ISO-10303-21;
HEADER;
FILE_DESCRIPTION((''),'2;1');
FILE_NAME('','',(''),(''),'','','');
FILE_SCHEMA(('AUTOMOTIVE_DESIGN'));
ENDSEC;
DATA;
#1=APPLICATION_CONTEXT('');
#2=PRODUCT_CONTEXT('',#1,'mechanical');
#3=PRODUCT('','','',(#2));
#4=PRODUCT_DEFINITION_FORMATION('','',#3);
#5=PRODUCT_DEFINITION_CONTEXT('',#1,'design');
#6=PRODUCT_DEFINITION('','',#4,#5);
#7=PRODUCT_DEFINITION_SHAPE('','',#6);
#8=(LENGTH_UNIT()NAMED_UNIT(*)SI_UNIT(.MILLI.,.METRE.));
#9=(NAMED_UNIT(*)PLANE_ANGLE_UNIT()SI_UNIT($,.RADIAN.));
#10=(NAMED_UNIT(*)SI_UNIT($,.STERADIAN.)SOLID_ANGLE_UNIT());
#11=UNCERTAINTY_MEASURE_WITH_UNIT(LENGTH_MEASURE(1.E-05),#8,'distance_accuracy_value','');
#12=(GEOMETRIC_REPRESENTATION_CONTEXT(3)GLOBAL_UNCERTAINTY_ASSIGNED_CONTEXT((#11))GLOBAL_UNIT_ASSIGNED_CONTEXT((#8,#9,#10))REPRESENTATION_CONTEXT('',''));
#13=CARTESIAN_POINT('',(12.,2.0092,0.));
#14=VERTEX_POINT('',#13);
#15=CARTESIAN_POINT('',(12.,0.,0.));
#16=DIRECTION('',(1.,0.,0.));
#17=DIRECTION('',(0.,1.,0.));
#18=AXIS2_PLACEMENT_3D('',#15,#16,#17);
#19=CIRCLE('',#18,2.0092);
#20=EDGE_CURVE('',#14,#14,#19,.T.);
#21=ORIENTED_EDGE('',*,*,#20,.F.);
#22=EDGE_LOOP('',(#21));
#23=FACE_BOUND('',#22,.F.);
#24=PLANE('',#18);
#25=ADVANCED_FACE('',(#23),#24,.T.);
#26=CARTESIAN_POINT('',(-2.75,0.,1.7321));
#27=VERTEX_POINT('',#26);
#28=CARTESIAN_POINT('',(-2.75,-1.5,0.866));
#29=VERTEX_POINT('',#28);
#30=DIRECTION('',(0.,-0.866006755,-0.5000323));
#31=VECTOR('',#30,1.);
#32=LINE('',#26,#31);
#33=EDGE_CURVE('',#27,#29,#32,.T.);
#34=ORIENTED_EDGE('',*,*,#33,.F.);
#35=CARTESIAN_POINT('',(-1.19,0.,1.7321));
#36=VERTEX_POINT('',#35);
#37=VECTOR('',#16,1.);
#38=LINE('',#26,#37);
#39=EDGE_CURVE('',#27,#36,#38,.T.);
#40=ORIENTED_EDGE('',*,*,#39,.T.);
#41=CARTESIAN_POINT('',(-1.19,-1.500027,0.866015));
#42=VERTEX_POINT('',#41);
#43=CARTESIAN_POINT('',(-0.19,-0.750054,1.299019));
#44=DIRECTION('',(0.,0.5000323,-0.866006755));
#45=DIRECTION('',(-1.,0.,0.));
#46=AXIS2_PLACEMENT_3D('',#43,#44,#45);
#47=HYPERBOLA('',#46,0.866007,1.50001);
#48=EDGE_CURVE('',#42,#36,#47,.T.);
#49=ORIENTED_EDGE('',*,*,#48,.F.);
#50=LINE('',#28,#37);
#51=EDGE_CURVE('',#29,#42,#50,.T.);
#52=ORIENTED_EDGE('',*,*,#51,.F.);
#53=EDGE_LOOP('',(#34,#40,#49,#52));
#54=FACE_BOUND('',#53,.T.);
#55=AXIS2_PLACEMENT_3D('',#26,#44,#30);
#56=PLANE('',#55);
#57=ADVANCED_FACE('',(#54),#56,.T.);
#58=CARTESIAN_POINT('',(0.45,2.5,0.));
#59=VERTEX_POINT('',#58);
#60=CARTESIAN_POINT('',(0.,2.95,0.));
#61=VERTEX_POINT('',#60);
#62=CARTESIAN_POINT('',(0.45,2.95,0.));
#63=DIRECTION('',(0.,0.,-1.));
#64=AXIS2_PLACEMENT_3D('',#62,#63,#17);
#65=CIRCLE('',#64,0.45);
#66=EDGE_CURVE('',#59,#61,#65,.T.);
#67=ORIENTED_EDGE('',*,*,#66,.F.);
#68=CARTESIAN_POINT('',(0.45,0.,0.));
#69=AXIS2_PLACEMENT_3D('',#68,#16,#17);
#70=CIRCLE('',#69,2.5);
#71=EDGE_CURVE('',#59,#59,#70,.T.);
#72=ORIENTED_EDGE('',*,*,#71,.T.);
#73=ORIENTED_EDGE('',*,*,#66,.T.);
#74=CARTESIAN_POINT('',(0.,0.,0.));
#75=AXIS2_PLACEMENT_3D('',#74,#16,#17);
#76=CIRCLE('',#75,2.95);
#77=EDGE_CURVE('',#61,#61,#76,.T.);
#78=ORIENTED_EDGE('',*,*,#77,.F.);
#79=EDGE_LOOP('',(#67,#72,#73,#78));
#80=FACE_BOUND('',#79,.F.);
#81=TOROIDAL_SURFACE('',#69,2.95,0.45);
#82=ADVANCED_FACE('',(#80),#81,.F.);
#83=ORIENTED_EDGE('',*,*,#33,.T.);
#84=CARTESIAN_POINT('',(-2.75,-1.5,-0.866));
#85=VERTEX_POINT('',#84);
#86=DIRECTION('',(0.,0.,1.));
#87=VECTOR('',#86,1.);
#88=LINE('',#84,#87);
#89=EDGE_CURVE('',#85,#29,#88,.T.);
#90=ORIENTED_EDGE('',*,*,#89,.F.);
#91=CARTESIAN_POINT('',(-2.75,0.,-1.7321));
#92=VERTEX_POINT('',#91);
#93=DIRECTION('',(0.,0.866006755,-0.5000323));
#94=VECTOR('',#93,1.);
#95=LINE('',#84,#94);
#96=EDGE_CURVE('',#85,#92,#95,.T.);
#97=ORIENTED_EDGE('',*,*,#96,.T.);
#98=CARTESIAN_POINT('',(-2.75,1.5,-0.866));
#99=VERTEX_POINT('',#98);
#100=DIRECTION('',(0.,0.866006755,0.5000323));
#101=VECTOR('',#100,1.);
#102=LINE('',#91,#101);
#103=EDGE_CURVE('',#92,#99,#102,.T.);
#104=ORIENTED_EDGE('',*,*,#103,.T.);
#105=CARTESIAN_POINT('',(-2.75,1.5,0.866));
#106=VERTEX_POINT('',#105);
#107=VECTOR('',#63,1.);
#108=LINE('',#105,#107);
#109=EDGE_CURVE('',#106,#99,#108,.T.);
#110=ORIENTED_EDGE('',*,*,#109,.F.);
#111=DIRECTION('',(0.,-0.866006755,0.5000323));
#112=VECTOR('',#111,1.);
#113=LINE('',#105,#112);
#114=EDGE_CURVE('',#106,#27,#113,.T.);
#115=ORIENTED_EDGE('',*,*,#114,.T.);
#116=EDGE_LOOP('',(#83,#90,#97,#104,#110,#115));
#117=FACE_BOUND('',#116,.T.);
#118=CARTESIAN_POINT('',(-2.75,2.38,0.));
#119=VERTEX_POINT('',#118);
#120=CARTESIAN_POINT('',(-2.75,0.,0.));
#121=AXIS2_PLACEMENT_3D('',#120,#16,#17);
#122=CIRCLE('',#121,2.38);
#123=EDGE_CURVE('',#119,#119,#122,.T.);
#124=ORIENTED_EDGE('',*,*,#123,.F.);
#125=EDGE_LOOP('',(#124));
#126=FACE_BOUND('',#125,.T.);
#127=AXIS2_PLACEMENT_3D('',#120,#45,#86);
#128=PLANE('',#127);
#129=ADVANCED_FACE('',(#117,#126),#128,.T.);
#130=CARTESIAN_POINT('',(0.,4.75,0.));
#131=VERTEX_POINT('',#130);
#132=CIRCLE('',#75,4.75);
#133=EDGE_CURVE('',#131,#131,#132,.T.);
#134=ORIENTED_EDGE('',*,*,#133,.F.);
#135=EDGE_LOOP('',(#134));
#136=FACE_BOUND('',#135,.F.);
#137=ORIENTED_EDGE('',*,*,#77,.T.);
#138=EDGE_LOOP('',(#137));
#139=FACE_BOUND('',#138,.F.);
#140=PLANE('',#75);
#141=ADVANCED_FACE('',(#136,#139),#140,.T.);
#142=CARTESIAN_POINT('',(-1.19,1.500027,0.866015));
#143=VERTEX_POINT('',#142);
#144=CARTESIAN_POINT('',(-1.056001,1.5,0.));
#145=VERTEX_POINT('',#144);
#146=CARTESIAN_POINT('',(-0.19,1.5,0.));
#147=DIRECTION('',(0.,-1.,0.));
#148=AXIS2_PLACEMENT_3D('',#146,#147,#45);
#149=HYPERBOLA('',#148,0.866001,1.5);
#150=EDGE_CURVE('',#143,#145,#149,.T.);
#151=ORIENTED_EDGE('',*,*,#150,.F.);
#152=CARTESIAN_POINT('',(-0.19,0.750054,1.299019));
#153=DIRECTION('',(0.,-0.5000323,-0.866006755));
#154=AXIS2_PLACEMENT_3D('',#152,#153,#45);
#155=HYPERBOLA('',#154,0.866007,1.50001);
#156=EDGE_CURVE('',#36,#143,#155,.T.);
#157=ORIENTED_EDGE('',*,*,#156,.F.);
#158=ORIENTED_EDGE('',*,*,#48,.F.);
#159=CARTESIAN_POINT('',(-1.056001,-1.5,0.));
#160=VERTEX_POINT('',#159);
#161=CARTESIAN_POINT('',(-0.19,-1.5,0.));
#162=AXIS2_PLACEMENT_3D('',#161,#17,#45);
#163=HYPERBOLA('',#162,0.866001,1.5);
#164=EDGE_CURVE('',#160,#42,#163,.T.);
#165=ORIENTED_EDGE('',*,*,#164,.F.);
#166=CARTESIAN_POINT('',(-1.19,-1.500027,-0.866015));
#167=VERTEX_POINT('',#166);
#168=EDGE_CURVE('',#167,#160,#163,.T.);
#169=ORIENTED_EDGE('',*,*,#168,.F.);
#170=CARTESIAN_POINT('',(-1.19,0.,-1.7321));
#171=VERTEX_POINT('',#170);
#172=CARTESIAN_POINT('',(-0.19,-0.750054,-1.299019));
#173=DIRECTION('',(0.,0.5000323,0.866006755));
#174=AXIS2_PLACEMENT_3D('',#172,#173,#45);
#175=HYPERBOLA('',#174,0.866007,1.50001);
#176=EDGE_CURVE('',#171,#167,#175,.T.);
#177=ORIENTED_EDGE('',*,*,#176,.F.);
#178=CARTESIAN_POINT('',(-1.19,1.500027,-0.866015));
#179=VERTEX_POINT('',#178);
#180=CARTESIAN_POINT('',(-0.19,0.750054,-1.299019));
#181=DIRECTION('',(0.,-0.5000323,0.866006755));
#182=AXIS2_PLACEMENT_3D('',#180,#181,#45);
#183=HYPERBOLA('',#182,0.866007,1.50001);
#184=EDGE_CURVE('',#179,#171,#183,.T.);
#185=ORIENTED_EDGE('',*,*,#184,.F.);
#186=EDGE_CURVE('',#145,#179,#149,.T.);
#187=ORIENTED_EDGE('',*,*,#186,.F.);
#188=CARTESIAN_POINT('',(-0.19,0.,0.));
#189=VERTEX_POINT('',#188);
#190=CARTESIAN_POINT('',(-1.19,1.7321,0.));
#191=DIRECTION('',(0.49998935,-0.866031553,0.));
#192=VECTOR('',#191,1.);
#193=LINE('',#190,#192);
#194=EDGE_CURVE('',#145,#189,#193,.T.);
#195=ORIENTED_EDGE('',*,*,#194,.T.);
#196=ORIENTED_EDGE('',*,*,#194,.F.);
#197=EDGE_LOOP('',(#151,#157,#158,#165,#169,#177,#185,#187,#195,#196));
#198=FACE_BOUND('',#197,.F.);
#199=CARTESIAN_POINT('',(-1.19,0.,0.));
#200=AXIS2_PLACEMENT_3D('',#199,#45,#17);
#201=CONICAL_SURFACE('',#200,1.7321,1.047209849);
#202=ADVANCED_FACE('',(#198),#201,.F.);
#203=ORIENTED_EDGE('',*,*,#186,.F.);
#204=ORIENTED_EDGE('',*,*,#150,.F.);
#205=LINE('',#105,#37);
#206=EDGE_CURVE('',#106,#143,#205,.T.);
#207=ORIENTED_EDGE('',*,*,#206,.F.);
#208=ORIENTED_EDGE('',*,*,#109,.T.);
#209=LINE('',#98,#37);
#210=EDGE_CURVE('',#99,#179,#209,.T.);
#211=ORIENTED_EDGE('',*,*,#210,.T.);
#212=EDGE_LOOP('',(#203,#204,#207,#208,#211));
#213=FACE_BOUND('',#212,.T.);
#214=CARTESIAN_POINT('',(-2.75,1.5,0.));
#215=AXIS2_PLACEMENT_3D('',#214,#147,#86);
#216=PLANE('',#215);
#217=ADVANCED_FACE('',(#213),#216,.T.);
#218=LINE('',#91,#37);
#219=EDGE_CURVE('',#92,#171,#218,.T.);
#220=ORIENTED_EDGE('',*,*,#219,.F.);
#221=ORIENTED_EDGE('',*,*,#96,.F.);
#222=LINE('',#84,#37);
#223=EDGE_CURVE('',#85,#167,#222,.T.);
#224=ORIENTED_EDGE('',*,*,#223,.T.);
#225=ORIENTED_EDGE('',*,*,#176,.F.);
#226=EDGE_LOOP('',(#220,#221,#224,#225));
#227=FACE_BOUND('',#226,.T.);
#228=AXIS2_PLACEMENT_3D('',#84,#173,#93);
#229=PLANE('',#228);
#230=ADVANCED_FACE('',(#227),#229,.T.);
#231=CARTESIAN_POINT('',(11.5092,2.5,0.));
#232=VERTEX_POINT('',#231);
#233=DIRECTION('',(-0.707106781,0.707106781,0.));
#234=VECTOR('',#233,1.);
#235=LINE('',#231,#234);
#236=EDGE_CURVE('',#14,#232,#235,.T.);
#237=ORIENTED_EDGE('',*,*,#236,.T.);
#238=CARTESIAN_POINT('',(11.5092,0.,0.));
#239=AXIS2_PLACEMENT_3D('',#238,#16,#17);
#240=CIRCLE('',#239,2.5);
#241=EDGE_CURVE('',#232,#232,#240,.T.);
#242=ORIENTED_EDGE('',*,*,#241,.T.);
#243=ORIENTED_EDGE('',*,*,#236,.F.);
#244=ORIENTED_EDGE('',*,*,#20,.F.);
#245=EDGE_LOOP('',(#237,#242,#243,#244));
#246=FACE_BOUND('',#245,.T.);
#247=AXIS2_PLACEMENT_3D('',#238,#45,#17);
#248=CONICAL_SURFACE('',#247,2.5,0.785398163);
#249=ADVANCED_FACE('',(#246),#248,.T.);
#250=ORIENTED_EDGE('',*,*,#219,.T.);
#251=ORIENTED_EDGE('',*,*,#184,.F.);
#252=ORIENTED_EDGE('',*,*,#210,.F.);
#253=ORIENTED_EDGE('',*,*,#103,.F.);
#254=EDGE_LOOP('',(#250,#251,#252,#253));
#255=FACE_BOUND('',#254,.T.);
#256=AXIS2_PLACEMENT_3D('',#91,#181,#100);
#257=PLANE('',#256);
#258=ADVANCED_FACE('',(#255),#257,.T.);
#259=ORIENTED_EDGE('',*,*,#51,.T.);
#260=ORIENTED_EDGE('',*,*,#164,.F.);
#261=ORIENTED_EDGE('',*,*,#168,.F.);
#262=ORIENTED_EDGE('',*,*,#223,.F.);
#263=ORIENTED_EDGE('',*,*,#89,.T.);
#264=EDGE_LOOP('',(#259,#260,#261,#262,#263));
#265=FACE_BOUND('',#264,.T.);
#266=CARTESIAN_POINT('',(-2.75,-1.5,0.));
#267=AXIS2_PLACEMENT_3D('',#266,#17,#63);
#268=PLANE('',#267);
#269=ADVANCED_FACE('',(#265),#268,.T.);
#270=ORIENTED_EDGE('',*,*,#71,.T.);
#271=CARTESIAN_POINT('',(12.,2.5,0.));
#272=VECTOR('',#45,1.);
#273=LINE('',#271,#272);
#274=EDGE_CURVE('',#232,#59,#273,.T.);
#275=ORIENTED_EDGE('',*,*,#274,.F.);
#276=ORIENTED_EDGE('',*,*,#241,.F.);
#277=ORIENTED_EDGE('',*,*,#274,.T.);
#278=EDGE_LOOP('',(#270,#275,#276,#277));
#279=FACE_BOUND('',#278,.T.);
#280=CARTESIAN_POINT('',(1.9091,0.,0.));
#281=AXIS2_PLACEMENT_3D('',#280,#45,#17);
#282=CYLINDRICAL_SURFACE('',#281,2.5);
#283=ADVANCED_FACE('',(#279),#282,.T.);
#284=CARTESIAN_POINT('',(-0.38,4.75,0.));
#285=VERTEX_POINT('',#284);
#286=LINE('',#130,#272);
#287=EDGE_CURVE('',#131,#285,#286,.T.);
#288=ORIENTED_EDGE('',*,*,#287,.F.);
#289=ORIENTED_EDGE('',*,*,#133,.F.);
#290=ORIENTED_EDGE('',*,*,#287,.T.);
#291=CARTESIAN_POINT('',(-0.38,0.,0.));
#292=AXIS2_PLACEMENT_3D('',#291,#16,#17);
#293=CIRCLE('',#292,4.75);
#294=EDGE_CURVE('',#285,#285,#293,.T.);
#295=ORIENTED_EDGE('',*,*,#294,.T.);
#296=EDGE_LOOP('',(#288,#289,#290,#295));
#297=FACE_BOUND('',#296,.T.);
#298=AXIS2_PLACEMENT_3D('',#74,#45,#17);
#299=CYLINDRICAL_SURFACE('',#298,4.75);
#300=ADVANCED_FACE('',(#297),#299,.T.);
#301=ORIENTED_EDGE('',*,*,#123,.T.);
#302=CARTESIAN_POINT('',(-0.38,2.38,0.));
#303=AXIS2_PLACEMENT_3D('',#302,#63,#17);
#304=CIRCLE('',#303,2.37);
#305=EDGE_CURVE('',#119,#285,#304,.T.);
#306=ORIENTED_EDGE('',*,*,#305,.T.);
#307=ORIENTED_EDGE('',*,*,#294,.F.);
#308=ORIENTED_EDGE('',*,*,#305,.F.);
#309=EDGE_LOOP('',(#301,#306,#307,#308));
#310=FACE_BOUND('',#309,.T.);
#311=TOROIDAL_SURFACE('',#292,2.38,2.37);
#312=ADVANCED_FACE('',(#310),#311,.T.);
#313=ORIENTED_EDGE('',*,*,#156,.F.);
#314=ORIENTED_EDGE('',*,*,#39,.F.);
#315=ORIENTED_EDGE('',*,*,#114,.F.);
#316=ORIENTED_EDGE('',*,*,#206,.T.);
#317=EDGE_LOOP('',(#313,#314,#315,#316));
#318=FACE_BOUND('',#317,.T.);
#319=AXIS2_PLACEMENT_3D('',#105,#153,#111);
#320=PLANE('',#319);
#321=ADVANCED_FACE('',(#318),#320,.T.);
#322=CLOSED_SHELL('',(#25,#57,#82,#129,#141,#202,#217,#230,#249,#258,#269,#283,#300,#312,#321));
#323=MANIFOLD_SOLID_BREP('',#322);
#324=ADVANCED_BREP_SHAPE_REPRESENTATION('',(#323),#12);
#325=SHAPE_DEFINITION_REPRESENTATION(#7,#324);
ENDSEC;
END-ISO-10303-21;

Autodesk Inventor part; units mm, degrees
ref_plane "YZ Plane" through (0, 0, 0) normal (1, 0, 0) x (0, 1, 0)
ref_plane "XZ Plane" through (0, 0, 0) normal (0, 1, 0) x (-1, 0, 0)
sketch "Эскиз1" plane through (0, 0, 0) normal (0, 0, 1) x (1, 0, 0)
  line L0 (-0.19, 0) -> (12, 0)
  line L1 (12, 0) -> (12, 2.5)
  line L2 (12, 2.5) -> (2.4, 2.5)
  line L3 (2.4, 2.5) -> (1.9091, 2.5)
  line L4 (1.9091, 2.5) -> (0, 2.5)
  line L5 (0, 2.5) -> (0, 4.75)
  line L6 (0, 4.75) -> (-2.75, 4.75)
  line L7 (-2.75, 4.75) -> (-2.75, 1.7321)
  line L8 (-2.75, 1.7321) -> (-1.19, 1.7321)
  line L9 (-1.19, 1.7321) -> (-0.19, 0)
  line L10 (-5.7, 0) -> (14.95, 0) projected
  line L11 (0, -0.95) -> (0, 5.7) projected
  line L12 (2.4, 2.5) -> (0, 2.5) construction
  dimension "d1" = 9.6
  dimension "d2" = 0.4909
  dimension "d3" = 2.75
  dimension "d4" = 1.56
  dimension "d5" = 60
  dimension "d6" = 5
  dimension "d7" = 5
  dimension "d8" = 3.4641
  dimension "d9" = 9.5
  dimension "d26" = 12
revolve "Базовый элемент" add sketch "Эскиз1" angle 360 about axis through (-0.19, 0, 0) along (1, 0, 0)
sketch "Эскиз2" plane through (-2.75, 0, 0) normal (-1, 0, 0) x (0, 0, 1)
  circle A0 centre (0, 0) radius 1.7321 projected
  line L0 (0, -6.65) -> (0, 6.65) projected
  line L1 (-6.65, 0) -> (6.65, 0) projected
  line L2 (1.7321, 0) -> (0.866, -1.5)
  line L3 (0.866, -1.5) -> (-0.866, -1.5)
  line L4 (-0.866, -1.5) -> (-1.7321, 0)
  line L5 (-1.7321, 0) -> (-0.866, 1.5)
  line L6 (-0.866, 1.5) -> (0.866, 1.5)
  line L7 (0.866, 1.5) -> (1.7321, 0)
extrude "Паз" add sketch "Эскиз2" against normal up to next contours L7 A0 | A0 L2 | L6 L0 A0 | A0 L0 L3 | L0 L6 A0 | A0 L3 L0 | L4 A0 | A0 L5
fillet "Сопряжение1" radius 2.37 1 edges at (-2.75, -4.75, 0)
thread "Резьба" size "M5x0.8" class "6g" standard "ISO Metric profile" length 9.6
chamfer "Фаска1" distance 0.4908 distance2 0.4908 1 edges at (12, -2.5, 0) measured on face at (12, -0.7741, -0.6858)
ref_plane "Work Plane1" through (29, 0, 0) normal (0, -1, 0) x (1, 0, 0)
fillet "Сопряжение2" radius 0.45 1 edges at (0, -2.5, 0)
equation "\"d17\" = RR"
equation "\"d13\" = GEL"
equation "\"d15\" = -0.5 * SPD + 0.5 * GD"
equation "\"d16\" = GUL"
equation "\"d30\" = R"
equation "\"d1\" = GEL"
equation "\"d3\" = KOH"
equation "\"d4\" = INTI"
equation "\"d6\" = GD"
equation "\"d7\" = BDM"
equation "\"d8\" = 1.1547 * SW"
equation "\"d9\" = KOD"
equation "\"d26\" = NLG"
equation "\"GD\" = NND"
equation "\"NLG\" = 12"
equation "\"GEL\" = 9.6"
equation "\"KOD\" = 9.5"
equation "\"KOH\" = 2.75"
equation "\"INTI\" = 1.56"
equation "\"GAL\" = 0.61345 * PTC"
equation "\"GUL\" = 0.61345 * PTC"
equation "\"BDM\" = NND"
equation "\"SW\" = 3"
equation "\"RR\" = 2.37"
equation "\"SPD\" = NND - 1.2269 * PTC"
equation "\"R\" = 0.45"
equation "\"TOA\" = 30deg"
equation "\"GD1\" = THREADDIA - 1.2269 * PTC"
equation "\"THREADDIA\" = 5"
equation "\"PTC\" = 0.8"
equation "\"NND\" = 5"
equation "\"KOH1\" = 0.38"
equation "\"E0\" = 3.443"
properties part number "ISO 7380-1 - M5 x 12" material "Сталь"
